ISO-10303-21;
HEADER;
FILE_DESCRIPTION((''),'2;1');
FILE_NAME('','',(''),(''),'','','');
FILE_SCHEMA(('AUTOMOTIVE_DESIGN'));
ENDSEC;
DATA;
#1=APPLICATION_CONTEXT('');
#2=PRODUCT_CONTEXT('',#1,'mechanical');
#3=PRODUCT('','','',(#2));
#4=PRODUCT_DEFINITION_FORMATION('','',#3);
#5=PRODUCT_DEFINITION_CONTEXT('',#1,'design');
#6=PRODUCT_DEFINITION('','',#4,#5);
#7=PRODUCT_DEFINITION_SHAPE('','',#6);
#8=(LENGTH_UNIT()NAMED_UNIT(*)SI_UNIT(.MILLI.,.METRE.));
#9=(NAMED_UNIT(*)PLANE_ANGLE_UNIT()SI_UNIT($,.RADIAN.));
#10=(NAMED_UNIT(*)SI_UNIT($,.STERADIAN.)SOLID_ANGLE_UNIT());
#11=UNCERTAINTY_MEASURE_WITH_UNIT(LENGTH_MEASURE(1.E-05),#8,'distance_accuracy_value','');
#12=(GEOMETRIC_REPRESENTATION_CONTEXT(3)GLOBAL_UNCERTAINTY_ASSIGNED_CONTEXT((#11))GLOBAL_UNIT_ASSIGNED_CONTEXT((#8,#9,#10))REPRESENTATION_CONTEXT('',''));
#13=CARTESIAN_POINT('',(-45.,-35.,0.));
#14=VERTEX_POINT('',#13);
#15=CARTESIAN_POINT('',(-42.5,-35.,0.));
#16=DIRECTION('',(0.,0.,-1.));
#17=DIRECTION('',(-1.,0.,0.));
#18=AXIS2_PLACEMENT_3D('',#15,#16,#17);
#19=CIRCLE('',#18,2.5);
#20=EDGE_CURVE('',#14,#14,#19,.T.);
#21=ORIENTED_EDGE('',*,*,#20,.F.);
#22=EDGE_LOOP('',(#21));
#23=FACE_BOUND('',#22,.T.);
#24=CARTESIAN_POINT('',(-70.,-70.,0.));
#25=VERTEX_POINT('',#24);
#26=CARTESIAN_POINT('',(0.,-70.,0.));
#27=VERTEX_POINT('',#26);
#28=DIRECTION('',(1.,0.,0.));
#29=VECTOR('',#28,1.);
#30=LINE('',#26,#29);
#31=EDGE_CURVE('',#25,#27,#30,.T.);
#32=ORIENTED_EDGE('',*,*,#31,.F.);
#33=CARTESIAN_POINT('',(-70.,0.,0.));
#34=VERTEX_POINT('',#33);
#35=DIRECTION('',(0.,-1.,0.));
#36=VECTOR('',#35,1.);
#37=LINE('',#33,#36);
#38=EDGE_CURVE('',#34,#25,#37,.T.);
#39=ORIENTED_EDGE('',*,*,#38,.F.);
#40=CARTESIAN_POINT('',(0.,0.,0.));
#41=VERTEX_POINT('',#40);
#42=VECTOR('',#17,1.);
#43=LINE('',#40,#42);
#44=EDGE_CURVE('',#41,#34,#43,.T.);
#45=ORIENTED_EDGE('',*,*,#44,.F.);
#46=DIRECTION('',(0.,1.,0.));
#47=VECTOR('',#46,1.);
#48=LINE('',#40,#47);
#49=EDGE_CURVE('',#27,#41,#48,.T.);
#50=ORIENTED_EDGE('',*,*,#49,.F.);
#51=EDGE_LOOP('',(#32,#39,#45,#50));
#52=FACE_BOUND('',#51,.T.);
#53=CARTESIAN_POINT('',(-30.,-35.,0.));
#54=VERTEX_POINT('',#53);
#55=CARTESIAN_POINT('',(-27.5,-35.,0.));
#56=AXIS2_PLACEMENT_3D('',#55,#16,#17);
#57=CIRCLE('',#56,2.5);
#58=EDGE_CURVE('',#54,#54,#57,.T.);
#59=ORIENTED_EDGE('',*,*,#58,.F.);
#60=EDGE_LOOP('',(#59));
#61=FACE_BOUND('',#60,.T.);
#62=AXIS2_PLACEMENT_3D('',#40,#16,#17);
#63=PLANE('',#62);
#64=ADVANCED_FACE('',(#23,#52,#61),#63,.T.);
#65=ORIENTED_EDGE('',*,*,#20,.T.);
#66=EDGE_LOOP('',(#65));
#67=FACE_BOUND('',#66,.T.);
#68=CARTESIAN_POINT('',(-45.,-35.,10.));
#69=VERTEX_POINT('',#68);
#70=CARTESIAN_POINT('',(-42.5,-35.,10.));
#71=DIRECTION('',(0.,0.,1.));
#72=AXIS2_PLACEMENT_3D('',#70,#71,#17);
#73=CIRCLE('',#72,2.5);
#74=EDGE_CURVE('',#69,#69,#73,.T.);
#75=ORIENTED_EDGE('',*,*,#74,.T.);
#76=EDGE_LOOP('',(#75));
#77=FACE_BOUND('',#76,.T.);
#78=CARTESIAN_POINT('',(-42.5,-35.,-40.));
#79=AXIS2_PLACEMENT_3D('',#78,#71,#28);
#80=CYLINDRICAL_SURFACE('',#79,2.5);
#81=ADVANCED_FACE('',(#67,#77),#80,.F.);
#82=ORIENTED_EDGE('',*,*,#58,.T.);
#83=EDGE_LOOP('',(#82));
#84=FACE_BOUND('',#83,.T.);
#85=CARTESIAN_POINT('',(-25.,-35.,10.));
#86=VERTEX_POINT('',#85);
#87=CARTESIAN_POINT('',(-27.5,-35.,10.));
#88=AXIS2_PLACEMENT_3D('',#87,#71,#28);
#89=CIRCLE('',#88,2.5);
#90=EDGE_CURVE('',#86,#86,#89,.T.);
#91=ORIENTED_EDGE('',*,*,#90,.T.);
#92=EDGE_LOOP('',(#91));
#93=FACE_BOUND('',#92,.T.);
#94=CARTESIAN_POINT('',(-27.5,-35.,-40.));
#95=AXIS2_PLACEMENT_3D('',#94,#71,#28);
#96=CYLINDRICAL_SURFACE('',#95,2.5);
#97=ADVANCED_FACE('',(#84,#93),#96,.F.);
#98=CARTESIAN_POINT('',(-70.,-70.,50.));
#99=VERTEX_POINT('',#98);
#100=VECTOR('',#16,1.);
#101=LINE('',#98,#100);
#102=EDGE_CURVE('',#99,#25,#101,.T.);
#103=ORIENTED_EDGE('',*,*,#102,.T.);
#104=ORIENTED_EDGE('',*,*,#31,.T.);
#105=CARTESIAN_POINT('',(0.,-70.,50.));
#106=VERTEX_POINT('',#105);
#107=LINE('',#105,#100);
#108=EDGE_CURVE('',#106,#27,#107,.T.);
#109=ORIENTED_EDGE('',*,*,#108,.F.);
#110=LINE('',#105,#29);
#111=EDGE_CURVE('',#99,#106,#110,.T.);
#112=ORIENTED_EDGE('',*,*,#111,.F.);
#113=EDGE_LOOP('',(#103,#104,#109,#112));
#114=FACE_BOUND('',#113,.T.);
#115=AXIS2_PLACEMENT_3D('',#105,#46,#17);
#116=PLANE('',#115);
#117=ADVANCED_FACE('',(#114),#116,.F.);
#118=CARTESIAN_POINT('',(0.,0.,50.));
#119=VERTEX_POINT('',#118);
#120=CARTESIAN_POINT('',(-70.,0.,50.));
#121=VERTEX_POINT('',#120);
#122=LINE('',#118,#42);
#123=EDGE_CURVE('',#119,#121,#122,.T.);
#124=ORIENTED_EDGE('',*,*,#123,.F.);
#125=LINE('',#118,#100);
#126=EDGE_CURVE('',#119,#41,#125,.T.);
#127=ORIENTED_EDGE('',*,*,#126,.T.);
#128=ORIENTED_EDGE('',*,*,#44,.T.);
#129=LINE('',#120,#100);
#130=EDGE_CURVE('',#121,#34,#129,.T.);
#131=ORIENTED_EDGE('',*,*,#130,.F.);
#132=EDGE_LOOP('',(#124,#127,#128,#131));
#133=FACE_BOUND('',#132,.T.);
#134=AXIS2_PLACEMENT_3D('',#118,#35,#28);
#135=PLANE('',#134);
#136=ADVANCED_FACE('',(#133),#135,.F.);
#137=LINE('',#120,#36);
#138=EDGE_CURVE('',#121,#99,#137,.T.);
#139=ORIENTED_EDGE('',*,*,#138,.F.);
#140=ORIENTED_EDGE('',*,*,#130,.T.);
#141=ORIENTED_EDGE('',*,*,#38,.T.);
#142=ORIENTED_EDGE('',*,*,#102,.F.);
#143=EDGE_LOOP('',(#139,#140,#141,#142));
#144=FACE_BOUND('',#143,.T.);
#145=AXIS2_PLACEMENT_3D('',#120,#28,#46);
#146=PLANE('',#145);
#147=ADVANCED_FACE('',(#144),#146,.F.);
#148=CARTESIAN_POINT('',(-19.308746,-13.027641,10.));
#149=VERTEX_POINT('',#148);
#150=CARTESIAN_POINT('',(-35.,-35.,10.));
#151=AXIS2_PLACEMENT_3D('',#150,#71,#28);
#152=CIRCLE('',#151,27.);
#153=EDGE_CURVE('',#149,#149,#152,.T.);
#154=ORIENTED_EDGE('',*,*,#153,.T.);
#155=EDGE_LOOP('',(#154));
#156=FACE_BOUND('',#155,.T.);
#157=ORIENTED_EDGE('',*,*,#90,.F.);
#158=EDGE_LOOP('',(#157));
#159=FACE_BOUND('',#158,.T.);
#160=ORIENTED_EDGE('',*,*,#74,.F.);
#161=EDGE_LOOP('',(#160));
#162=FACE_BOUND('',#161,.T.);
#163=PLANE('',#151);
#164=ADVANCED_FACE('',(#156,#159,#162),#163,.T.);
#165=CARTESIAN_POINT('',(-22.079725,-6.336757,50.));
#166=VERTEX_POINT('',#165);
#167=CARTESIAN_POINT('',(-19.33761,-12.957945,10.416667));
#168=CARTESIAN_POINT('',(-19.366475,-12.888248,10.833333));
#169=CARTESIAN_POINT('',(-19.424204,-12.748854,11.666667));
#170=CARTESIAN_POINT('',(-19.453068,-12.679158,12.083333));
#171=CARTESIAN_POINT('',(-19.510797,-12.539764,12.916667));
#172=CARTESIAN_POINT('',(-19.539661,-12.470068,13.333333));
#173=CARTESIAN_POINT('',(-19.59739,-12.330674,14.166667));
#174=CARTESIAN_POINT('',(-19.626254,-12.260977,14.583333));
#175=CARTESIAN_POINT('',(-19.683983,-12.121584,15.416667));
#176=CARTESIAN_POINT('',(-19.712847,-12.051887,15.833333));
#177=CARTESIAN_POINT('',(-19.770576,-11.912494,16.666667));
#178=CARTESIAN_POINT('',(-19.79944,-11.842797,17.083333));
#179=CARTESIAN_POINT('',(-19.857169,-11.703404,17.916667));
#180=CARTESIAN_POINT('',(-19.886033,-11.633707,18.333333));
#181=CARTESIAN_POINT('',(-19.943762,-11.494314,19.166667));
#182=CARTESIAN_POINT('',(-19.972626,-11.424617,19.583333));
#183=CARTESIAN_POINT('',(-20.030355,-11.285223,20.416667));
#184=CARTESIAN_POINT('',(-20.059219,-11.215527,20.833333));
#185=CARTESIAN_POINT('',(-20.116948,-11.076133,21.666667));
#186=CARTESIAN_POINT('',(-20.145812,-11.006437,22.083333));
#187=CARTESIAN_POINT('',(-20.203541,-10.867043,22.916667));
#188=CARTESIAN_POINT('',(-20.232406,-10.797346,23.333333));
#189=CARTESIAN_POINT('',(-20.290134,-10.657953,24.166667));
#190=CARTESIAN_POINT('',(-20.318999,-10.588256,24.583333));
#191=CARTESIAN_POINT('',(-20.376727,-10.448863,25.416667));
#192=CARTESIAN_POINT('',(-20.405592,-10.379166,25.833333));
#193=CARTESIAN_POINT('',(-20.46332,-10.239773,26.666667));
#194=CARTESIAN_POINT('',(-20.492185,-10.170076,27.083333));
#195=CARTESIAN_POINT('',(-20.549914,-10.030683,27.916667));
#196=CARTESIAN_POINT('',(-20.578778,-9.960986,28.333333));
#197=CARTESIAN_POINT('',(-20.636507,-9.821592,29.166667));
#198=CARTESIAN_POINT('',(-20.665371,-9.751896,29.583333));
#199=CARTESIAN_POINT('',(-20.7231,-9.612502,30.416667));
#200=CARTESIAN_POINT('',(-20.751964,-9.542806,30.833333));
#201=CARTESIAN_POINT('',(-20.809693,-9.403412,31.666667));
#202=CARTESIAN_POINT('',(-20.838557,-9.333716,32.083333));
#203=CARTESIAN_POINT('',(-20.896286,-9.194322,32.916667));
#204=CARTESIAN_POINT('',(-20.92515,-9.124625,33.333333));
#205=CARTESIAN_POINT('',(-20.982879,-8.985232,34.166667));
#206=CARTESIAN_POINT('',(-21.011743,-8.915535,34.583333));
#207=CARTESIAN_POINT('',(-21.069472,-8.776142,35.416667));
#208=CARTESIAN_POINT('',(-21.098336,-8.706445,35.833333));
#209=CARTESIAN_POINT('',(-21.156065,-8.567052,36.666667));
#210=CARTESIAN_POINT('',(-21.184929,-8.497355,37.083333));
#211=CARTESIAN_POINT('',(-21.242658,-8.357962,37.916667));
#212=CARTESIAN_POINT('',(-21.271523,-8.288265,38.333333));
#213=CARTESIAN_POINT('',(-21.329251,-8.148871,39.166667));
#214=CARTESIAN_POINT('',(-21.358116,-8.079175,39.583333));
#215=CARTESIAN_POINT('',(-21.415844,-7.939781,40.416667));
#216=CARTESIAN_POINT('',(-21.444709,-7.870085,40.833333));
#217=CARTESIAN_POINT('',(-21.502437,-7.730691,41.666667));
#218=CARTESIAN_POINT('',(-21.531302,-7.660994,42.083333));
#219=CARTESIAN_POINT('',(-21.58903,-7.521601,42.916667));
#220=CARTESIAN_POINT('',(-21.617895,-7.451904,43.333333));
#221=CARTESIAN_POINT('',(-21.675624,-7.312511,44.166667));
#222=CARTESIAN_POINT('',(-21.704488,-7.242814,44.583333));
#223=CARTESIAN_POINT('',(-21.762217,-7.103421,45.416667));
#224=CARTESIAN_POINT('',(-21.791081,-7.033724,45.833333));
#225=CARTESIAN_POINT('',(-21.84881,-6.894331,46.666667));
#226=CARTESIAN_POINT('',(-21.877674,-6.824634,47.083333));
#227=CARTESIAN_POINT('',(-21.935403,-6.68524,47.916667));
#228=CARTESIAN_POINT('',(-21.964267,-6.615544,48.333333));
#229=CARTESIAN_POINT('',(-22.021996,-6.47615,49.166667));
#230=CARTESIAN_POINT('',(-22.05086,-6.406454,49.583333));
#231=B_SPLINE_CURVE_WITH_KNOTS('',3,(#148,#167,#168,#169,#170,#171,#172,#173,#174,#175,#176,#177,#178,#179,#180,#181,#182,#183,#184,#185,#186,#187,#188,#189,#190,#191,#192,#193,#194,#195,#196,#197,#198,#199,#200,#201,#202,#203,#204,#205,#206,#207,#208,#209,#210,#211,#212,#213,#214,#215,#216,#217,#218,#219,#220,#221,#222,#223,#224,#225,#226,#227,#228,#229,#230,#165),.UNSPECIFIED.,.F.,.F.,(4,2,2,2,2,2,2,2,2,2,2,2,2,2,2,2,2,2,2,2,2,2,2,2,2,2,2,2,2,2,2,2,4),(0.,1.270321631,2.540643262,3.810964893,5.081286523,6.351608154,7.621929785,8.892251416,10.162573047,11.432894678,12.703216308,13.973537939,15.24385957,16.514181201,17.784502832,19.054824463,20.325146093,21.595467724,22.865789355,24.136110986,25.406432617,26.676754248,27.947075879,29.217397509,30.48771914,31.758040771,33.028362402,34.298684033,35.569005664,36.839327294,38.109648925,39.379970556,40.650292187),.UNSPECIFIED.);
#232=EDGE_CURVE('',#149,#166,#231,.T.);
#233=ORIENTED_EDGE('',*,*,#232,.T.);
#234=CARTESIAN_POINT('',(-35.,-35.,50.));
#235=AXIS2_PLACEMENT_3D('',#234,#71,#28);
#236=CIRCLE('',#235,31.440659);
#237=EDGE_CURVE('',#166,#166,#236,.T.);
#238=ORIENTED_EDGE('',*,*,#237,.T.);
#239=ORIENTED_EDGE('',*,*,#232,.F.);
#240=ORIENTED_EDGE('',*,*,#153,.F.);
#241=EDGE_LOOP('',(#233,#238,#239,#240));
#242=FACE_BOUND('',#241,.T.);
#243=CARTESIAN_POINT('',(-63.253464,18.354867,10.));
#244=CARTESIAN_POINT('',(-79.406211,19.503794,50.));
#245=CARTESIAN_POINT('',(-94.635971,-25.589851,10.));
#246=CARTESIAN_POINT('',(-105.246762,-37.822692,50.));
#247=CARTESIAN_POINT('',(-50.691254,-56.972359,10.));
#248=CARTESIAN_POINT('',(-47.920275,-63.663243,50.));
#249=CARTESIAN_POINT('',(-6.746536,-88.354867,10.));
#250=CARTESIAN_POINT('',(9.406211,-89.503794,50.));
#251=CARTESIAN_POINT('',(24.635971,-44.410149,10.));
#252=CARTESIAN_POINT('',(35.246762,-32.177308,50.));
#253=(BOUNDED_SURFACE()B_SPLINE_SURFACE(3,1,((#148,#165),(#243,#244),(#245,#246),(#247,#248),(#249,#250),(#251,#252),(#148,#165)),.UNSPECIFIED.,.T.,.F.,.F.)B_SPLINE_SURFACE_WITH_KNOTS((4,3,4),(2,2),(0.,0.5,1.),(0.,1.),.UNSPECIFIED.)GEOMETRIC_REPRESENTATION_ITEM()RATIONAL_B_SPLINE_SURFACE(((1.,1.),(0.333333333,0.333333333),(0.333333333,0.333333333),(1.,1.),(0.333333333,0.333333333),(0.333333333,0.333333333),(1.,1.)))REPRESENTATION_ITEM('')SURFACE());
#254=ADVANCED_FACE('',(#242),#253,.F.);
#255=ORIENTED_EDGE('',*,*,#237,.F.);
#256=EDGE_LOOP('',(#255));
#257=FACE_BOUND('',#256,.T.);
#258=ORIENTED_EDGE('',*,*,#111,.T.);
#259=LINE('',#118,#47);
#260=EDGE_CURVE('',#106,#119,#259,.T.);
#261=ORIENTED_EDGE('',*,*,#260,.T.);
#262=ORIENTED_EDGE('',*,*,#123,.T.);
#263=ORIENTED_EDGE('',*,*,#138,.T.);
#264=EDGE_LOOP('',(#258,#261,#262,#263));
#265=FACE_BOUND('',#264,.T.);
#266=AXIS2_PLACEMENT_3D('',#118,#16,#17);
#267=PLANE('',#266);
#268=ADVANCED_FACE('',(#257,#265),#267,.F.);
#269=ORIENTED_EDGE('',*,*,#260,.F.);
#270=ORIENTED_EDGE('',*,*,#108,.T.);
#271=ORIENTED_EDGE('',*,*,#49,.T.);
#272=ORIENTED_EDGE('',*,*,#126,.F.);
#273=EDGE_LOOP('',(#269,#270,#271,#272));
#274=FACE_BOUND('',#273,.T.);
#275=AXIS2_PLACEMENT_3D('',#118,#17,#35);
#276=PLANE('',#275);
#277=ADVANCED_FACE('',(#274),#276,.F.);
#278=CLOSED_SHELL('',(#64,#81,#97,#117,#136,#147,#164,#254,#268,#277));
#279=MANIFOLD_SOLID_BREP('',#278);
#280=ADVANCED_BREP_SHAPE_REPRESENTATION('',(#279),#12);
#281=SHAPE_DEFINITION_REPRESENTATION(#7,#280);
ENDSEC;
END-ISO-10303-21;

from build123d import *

# Parameters (mm, degrees)
SKETCH1_W           = 70
SKETCH1_H           = 70
BOSS_EXTRUDE1_DEPTH = 50
SKETCH8_R           = 2.5
CUT_EXTRUDE1_DEPTH  = 50


with BuildPart() as part:
    # Sketch1 → Boss-Extrude1 (new body)
    with BuildSketch(Plane.XY):
        with Locations((-35, -35)):
            Rectangle(SKETCH1_W, SKETCH1_H)
    extrude(amount=BOSS_EXTRUDE1_DEPTH)

    # Cut-Loft1: read off the stored shape, not the designer's step
    # Cut-Loft1: loft between two sections, ruled curve by curve
    cut_loft1_from = [
        Edge.make_bspline([(-19.308746069, -13.027641226, 10), (-63.253463616, 18.354866636, 10), (-94.635971478, -25.589850912, 10), (-50.691253931, -56.972358774, 10), (-6.746536384, -88.354866636, 10), (24.635971478, -44.410149088, 10), (-19.308746069, -13.027641226, 10)], [0, 0, 0, 0, 0.5, 0.5, 0.5, 1, 1, 1, 1], 3, [1, 0.333333333, 0.333333333, 1, 0.333333333, 0.333333333, 1]),
    ]
    cut_loft1_to = [
        Edge.make_bspline([(-22.079724584, -6.336756909, 50), (-79.406210767, 19.503793923, 50), (-105.246761599, -37.82269226, 50), (-47.920275416, -63.663243091, 50), (9.406210767, -89.503793923, 50), (35.246761599, -32.17730774, 50), (-22.079724584, -6.336756909, 50)], [0, 0, 0, 0, 0.5, 0.5, 0.5, 1, 1, 1, 1], 3, [1, 0.333333333, 0.333333333, 1, 0.333333333, 0.333333333, 1]),
    ]
    cut_loft1 = Solid(Shell([*[Face.make_surface_from_curves(cut_loft1_from[k], cut_loft1_to[k]) for k in range(1)], Face(Wire(cut_loft1_from)), Face(Wire(cut_loft1_to))]))
    add(cut_loft1, mode=Mode.SUBTRACT)

    # Sketch8 → Cut-Extrude1 (cut)
    with BuildSketch(Plane.XY.offset(10)):
        with Locations((-27.5, -35)):
            Circle(SKETCH8_R)
        with Locations(Location((-42.5, -35, 0), (0, 0, 180))):
            Circle(SKETCH8_R)
    extrude(amount=-CUT_EXTRUDE1_DEPTH, mode=Mode.SUBTRACT)


solid = part.part
